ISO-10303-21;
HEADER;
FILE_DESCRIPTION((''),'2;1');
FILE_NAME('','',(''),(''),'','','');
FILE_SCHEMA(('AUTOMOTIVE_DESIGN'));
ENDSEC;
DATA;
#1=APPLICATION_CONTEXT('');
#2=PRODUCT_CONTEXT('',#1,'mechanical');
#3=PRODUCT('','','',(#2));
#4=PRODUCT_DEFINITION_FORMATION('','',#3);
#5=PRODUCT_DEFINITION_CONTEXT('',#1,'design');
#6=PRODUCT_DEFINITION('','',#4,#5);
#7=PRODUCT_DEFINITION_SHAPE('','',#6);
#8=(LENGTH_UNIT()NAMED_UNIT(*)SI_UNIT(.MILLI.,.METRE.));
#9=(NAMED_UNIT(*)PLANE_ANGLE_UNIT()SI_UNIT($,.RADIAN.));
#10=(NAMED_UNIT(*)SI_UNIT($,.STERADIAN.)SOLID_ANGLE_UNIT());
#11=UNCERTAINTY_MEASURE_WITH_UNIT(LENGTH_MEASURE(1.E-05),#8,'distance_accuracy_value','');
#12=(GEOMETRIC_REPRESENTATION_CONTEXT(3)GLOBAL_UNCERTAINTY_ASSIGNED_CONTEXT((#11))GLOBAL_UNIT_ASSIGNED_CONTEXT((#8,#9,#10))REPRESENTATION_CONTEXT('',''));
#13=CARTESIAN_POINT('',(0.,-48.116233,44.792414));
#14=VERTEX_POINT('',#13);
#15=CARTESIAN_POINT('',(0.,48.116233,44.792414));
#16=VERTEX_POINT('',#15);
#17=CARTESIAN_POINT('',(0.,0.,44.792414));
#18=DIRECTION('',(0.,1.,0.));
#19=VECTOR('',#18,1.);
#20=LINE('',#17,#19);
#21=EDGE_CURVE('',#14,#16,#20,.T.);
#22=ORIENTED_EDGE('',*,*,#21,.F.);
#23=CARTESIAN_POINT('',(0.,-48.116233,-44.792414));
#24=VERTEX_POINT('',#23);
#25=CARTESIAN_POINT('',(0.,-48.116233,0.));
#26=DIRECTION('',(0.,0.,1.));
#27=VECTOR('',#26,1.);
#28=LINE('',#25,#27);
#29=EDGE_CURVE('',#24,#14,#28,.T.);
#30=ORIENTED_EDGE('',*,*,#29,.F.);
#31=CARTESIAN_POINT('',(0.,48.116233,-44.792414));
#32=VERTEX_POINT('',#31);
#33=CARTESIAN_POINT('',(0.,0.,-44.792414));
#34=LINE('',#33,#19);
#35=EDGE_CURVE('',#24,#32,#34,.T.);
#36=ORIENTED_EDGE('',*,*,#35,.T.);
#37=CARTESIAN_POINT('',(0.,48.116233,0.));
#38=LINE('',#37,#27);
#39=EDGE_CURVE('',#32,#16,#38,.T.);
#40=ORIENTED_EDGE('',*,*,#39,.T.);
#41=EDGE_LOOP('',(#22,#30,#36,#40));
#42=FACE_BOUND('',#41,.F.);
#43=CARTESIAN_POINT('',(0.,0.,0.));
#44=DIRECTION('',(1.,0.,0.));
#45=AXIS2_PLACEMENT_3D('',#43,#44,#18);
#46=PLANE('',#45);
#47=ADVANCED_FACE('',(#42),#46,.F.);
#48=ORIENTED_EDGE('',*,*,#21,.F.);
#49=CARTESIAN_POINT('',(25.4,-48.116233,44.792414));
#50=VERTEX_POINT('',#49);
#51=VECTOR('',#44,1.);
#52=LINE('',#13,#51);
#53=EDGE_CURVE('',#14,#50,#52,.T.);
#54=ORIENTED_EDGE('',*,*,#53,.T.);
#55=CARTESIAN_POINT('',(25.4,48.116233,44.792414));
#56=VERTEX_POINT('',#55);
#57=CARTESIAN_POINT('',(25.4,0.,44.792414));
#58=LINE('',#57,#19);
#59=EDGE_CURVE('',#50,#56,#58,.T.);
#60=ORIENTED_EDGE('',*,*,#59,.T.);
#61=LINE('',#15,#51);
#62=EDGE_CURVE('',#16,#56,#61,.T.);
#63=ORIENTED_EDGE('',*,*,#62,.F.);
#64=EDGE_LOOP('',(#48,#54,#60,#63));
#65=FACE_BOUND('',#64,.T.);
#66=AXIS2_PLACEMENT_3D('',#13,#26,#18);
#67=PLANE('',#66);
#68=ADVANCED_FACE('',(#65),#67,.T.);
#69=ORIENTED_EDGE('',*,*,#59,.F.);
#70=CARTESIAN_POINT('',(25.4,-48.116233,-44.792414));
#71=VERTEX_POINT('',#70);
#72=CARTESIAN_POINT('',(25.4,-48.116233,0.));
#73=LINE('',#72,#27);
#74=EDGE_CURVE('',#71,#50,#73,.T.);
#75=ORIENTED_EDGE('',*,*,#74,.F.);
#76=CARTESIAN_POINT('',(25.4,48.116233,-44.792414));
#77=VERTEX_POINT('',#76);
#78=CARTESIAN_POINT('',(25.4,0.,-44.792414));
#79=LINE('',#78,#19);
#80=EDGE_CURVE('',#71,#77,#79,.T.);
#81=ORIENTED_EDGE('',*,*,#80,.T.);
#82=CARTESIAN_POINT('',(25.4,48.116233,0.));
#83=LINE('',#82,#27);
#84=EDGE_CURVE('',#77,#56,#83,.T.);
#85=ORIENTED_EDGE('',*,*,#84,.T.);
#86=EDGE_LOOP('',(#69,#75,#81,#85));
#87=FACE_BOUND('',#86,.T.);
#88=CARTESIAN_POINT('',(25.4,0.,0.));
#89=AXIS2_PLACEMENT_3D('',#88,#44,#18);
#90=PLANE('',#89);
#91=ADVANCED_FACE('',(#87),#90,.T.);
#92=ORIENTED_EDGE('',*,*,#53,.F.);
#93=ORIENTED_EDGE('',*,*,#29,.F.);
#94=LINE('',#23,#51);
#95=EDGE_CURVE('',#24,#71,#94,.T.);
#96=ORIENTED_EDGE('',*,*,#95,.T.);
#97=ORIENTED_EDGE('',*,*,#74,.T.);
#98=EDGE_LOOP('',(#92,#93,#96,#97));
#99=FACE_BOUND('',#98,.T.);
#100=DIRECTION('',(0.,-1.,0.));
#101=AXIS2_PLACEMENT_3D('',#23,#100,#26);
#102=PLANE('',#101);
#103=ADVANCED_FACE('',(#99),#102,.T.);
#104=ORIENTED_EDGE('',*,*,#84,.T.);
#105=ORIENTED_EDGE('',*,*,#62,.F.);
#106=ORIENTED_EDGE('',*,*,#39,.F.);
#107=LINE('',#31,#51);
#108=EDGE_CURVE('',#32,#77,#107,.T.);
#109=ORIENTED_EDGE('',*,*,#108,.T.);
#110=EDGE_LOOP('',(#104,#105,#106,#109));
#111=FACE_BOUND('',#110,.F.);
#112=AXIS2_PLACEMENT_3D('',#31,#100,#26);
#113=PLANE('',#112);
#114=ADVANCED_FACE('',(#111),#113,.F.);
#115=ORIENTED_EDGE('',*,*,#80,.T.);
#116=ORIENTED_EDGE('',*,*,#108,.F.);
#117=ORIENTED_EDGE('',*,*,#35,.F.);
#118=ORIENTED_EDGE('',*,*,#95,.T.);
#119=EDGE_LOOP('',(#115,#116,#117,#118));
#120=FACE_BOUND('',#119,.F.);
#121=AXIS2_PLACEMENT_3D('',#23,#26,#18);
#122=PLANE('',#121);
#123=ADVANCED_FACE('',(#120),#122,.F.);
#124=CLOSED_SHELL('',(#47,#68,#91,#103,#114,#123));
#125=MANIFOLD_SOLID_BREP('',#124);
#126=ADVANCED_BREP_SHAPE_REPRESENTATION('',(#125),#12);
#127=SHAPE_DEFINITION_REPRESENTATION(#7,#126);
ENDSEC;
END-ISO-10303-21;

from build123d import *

# Parameters (mm, degrees)
F0_W     = 96.2324663997
F0_H     = 89.5848274231
F1_DEPTH = 25.4


# Not quite as in the source:
# - the program builds the solid bodies; features that only make, move or delete a surface that nothing else refers to are left out


with BuildPart() as f1:
    # F0 (on Right) → F1 (new body)
    with BuildSketch(Plane.YZ):
        Rectangle(F0_W, F0_H)
    extrude(amount=F1_DEPTH)


solid = f1.part
